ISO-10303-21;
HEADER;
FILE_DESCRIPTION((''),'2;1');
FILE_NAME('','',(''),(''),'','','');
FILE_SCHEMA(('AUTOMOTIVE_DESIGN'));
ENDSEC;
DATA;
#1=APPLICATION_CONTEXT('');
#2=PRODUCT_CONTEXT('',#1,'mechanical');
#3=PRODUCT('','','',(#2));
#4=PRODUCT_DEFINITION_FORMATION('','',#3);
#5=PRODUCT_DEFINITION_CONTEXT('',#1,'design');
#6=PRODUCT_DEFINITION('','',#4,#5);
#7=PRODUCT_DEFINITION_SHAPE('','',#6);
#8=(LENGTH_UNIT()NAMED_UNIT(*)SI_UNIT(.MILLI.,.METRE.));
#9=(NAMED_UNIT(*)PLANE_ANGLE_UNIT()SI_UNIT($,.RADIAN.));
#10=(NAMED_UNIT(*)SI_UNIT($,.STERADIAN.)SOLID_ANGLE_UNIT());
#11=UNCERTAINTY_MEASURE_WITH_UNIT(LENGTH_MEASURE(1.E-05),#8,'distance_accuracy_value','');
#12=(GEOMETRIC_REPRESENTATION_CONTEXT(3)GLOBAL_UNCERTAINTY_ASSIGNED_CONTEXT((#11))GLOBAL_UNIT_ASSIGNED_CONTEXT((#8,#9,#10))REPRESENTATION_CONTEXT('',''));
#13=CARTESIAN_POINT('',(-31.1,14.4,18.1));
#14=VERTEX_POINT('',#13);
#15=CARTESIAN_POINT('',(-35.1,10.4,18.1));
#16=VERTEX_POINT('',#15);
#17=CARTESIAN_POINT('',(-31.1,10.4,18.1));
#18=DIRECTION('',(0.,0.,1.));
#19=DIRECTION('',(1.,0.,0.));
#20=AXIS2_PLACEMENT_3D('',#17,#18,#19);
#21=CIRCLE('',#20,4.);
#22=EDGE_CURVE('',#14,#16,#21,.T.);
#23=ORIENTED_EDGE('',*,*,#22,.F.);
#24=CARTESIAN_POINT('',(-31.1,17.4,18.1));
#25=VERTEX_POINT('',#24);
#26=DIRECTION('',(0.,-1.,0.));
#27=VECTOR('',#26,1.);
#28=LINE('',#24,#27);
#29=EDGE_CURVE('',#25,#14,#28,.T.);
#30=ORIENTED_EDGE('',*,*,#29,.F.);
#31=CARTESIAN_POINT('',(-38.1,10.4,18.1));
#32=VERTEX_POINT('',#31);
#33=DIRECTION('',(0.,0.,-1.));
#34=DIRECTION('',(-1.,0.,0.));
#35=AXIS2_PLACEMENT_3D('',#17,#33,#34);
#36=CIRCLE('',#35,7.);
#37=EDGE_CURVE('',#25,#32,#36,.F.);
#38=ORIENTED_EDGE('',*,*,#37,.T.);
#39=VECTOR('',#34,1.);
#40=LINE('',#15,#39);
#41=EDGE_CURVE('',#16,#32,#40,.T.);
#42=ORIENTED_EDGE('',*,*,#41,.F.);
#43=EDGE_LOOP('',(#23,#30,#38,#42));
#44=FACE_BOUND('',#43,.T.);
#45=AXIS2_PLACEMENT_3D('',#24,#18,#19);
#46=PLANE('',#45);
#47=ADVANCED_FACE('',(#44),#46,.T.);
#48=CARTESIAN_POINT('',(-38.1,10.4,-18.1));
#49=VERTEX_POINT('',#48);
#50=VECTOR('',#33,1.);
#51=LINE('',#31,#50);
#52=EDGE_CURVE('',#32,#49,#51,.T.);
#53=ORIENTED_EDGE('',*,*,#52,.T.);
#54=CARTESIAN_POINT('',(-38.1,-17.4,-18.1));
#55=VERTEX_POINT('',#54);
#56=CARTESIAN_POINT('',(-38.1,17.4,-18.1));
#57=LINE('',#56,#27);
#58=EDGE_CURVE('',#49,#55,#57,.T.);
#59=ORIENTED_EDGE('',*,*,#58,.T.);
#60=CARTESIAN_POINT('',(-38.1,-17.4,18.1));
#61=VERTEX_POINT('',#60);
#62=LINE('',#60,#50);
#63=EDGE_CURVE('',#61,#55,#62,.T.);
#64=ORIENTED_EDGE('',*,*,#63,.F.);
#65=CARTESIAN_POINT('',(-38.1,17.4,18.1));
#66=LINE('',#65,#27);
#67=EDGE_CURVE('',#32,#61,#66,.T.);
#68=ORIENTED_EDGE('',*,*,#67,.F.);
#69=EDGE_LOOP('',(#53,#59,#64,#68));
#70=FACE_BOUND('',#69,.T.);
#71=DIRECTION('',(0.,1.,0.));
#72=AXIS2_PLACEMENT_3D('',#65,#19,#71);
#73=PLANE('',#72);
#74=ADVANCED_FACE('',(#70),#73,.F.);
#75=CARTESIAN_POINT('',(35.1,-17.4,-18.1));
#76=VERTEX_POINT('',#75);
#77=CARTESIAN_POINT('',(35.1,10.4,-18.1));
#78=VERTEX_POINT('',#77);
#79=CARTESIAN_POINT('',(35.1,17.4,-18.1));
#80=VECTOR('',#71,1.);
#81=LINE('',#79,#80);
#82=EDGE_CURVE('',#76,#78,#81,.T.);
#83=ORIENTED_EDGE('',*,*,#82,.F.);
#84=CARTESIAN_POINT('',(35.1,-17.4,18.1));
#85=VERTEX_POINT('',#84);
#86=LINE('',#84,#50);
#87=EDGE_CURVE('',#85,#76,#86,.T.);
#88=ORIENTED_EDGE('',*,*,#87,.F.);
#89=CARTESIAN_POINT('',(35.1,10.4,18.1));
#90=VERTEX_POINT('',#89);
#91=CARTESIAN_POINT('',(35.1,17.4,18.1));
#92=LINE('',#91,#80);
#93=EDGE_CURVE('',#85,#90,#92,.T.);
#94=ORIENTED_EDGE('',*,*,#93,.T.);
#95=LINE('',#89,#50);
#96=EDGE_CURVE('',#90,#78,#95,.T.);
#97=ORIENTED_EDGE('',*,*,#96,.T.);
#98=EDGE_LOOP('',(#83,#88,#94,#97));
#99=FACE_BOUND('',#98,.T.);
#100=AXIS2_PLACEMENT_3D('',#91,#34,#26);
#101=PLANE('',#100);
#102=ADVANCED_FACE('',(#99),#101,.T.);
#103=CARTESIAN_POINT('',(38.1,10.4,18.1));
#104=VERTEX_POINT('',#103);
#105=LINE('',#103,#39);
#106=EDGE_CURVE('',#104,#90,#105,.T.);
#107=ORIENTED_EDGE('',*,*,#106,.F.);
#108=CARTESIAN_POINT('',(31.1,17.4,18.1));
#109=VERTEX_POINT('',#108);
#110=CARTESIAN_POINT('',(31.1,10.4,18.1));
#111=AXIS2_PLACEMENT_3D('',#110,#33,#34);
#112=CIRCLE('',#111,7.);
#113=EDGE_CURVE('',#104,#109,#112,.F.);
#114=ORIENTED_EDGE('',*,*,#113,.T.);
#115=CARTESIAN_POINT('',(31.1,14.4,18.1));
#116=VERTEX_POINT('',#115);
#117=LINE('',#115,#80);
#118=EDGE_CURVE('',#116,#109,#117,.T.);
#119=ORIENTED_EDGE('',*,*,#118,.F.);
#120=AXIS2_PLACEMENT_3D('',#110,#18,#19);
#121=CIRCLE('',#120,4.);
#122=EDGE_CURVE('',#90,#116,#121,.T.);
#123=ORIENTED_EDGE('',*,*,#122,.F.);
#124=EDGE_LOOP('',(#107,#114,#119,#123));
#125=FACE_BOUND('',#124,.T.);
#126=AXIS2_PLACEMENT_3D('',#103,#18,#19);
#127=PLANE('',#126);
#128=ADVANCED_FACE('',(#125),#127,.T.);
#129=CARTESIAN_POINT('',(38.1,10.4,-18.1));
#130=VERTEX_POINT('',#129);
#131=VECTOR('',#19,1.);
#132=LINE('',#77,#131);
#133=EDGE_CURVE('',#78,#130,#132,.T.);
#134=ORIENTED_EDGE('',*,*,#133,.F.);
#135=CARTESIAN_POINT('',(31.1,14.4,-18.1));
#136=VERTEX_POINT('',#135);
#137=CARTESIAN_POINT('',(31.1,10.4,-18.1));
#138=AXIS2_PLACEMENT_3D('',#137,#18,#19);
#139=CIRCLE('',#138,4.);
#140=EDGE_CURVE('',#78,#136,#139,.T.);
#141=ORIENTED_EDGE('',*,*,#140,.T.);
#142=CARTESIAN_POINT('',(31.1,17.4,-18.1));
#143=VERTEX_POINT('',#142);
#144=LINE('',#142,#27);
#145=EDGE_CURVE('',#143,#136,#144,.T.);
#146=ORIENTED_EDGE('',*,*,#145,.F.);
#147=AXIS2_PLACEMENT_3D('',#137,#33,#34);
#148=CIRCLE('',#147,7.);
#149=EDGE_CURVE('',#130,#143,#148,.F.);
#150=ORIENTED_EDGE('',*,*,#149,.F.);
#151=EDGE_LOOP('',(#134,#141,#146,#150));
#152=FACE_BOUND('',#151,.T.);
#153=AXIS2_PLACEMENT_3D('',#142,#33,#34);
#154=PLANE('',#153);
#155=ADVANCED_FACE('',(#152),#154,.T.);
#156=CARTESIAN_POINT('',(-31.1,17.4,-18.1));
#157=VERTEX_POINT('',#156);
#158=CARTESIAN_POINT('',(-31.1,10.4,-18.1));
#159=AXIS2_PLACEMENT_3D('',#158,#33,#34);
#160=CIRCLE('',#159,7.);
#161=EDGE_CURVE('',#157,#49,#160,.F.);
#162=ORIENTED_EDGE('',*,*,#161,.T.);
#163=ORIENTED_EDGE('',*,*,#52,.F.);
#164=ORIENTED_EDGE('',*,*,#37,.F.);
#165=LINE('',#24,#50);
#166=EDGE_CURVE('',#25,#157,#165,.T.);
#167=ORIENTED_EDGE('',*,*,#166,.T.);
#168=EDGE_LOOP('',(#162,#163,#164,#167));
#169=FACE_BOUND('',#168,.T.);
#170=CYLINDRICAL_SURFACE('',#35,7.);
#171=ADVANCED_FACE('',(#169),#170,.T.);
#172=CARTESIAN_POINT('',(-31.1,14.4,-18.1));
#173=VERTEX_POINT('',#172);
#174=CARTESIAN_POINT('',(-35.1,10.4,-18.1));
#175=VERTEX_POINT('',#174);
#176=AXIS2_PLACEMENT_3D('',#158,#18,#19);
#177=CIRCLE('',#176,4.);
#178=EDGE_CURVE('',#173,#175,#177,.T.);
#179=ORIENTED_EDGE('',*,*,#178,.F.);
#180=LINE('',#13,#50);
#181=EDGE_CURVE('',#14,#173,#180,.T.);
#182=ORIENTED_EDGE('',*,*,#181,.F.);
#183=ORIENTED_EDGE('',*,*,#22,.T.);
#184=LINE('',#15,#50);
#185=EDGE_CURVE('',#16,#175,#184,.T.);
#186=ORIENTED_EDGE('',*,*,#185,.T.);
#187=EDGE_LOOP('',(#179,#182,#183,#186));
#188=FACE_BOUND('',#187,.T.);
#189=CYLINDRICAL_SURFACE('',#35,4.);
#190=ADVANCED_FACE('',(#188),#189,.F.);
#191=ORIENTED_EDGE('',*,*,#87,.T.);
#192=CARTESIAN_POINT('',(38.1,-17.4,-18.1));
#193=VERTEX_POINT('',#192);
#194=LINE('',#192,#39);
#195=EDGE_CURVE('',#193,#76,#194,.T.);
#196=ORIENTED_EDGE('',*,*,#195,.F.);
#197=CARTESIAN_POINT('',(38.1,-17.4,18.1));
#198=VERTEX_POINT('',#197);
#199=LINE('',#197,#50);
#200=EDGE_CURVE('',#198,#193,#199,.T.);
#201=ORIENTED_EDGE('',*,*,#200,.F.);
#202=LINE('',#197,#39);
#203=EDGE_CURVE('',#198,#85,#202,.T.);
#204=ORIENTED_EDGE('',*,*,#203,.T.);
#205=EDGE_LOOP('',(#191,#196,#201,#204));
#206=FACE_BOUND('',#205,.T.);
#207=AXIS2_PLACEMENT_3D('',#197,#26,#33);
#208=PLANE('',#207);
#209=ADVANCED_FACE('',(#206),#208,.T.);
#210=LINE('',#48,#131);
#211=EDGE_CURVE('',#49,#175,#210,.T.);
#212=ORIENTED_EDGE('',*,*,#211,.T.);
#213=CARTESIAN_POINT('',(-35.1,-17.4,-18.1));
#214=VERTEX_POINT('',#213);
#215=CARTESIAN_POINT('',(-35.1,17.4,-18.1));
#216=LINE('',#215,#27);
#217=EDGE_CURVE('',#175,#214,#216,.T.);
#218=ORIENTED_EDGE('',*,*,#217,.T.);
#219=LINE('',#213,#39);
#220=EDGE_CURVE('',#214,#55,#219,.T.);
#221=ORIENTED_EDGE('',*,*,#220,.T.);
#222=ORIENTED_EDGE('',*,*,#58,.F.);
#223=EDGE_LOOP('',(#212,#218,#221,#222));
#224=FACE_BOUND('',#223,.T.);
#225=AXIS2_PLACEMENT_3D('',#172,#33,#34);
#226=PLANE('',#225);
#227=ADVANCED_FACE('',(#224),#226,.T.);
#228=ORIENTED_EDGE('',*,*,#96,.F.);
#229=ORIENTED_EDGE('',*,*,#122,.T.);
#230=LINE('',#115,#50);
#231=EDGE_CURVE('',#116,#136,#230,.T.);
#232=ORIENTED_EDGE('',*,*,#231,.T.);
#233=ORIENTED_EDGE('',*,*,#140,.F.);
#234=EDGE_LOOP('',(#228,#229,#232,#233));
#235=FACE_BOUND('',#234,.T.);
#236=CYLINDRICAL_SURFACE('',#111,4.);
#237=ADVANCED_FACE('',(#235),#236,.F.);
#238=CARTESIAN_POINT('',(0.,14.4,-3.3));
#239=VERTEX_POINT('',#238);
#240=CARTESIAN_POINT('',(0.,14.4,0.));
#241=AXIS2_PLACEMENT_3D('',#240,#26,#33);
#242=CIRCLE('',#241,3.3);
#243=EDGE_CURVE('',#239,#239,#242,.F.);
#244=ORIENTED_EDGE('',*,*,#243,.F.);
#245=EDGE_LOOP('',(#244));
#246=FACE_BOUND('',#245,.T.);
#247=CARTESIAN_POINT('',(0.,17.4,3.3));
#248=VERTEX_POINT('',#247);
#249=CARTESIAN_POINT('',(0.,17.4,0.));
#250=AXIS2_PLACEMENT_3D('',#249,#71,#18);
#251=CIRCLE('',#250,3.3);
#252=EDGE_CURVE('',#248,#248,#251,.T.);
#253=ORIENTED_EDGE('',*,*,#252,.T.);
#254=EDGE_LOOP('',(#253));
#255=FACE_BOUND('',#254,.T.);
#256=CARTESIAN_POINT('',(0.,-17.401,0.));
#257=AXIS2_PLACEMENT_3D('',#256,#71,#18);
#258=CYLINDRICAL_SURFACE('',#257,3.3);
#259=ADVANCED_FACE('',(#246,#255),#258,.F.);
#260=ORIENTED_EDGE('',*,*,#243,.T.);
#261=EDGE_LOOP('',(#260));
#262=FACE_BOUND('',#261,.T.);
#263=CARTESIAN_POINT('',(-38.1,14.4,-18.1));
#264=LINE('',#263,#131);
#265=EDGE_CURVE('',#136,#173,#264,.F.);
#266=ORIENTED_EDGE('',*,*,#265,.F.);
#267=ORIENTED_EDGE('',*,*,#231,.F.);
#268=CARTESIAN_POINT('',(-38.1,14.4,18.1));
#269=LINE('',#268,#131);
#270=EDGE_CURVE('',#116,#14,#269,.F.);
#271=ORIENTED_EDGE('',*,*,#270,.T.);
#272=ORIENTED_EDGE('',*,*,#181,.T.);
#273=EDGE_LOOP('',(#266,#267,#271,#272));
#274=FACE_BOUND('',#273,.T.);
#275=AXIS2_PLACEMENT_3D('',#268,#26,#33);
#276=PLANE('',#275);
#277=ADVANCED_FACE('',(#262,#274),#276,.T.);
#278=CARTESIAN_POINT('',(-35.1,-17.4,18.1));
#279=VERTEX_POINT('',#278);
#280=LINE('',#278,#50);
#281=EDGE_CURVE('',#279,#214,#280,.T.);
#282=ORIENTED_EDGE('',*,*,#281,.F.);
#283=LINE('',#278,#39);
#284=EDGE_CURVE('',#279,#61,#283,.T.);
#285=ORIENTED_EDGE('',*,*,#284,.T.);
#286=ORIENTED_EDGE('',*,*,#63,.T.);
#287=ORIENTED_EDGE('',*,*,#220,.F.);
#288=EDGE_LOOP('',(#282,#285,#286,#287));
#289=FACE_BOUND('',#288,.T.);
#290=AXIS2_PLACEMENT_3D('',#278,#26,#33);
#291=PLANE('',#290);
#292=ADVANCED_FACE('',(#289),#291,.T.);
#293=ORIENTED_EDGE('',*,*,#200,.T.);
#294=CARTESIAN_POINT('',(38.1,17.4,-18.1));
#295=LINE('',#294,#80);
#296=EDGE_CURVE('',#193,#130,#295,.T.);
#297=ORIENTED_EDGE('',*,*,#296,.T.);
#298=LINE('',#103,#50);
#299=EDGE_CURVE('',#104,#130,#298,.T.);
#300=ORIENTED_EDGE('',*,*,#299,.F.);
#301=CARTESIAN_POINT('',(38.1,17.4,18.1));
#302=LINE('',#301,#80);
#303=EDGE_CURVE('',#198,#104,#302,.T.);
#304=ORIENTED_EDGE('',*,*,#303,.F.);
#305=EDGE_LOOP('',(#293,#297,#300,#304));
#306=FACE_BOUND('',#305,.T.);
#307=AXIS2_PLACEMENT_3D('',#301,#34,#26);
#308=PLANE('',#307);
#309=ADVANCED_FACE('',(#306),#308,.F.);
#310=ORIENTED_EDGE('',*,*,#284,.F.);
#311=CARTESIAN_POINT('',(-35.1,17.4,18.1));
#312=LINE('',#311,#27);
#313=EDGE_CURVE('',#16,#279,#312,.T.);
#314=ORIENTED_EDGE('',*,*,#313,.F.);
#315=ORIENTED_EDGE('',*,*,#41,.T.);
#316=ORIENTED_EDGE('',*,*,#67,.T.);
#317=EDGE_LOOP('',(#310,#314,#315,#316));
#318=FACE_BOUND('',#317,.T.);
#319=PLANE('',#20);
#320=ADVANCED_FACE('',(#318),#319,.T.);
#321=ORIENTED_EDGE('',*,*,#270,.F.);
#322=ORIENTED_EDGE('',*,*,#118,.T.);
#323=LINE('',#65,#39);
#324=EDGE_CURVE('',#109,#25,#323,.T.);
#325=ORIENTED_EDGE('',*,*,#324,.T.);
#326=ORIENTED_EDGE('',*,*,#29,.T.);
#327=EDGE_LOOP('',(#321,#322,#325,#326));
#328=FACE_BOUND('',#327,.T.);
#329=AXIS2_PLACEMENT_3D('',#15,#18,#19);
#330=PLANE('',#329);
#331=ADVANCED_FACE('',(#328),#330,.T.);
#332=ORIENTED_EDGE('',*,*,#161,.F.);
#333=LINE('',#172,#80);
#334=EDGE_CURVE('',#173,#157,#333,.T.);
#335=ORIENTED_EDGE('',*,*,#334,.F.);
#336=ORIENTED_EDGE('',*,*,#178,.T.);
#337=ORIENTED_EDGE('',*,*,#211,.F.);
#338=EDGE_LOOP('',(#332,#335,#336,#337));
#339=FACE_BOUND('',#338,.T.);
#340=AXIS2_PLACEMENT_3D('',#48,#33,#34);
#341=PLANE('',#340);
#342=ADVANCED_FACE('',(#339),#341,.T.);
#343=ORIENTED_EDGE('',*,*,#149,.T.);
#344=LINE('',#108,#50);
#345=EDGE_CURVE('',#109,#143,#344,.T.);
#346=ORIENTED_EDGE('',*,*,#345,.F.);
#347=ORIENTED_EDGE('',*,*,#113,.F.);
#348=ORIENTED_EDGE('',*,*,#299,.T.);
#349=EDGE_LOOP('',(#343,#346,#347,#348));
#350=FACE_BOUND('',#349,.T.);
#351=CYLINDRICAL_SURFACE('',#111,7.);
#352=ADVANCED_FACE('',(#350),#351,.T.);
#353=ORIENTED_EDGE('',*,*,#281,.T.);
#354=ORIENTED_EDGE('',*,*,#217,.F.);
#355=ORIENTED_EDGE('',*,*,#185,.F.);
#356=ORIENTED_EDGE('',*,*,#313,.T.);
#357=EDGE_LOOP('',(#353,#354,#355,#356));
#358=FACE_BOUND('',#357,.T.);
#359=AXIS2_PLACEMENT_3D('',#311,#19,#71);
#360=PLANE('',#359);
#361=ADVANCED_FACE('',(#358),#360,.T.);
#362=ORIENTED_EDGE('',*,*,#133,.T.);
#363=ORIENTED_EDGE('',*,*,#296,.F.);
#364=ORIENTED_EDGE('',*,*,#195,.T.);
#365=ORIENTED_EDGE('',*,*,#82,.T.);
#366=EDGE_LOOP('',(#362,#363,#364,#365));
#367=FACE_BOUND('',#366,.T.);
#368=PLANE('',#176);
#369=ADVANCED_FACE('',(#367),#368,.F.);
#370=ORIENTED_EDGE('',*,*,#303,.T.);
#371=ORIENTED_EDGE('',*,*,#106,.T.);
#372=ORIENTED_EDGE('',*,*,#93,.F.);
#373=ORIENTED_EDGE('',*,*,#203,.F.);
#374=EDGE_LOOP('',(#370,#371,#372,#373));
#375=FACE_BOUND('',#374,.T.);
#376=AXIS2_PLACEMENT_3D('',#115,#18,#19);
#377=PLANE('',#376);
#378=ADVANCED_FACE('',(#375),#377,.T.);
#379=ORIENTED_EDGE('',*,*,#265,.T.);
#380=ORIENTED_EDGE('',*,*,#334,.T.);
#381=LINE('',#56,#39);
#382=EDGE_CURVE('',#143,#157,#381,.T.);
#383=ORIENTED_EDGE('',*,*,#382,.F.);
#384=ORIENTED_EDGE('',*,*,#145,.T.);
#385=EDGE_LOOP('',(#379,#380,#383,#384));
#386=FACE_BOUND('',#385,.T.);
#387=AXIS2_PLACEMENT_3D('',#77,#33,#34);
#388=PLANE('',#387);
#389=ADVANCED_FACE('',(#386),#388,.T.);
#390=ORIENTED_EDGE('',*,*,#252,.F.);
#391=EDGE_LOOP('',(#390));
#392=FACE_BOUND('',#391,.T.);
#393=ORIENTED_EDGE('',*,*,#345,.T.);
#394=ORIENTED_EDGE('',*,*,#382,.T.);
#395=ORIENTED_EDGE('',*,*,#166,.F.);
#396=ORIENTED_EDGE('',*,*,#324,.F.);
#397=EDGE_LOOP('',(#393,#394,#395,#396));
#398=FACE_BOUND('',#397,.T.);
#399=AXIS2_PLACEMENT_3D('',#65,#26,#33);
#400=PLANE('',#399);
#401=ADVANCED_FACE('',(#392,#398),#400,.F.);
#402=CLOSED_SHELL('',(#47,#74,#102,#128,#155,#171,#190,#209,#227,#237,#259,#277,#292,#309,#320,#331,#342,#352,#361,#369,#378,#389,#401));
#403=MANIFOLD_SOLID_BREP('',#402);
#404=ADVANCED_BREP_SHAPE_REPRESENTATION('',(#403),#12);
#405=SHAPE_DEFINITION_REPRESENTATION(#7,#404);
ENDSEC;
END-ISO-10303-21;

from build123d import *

# Parameters (mm, degrees)
BASE_FLANGE1_DEPTH = 18.1
CUT_EXTRUDE1_REACH = 56.683
SKETCH6_R          = 3.3


# Sheet-metal steps are written as plain solids
with BuildPart() as part:
    # Sketch1 → Base-Flange1 (new, symmetric)
    with BuildSketch(Plane.XY):
        with BuildLine():
            Line((-38.1, -17.4), (-38.1, 10.4))
            ThreePointArc((-38.1, 10.4), (-36.049747468, 15.349747468), (-31.1, 17.4))
            Line((-31.1, 17.4), (31.1, 17.4))
            ThreePointArc((31.1, 17.4), (36.049747468, 15.349747468), (38.1, 10.4))
            Line((38.1, 10.4), (38.1, -17.4))
            Line((38.1, -17.4), (35.1, -17.4))
            Line((35.1, -17.4), (35.1, 10.4))
            ThreePointArc((35.1, 10.4), (33.928427125, 13.228427125), (31.1, 14.4))
            Line((31.1, 14.4), (-31.1, 14.4))
            ThreePointArc((-31.1, 14.4), (-33.928427125, 13.228427125), (-35.1, 10.4))
            Line((-35.1, 10.4), (-35.1, -17.4))
            Line((-35.1, -17.4), (-38.1, -17.4))
        make_face()
    extrude(amount=BASE_FLANGE1_DEPTH, both=True)

    # Sketch6 → Cut-Extrude1 (cut, up to next)
    with BuildSketch(Plane(origin=(0, 17.4, 0), x_dir=(1, 0, 0), z_dir=(0, 1, 0)), mode=Mode.PRIVATE) as cut_extrude1_sk1:
        with Locations(Location((0, 0, 0), (0, 0, 270))):
            Circle(SKETCH6_R)
    cut_extrude1_tool1 = extrude(cut_extrude1_sk1.sketch, amount=-CUT_EXTRUDE1_REACH, mode=Mode.PRIVATE) & part.part
    add(cut_extrude1_tool1.solids().sort_by_distance((0, 17.4, 0))[0], mode=Mode.SUBTRACT)


solid = part.part
